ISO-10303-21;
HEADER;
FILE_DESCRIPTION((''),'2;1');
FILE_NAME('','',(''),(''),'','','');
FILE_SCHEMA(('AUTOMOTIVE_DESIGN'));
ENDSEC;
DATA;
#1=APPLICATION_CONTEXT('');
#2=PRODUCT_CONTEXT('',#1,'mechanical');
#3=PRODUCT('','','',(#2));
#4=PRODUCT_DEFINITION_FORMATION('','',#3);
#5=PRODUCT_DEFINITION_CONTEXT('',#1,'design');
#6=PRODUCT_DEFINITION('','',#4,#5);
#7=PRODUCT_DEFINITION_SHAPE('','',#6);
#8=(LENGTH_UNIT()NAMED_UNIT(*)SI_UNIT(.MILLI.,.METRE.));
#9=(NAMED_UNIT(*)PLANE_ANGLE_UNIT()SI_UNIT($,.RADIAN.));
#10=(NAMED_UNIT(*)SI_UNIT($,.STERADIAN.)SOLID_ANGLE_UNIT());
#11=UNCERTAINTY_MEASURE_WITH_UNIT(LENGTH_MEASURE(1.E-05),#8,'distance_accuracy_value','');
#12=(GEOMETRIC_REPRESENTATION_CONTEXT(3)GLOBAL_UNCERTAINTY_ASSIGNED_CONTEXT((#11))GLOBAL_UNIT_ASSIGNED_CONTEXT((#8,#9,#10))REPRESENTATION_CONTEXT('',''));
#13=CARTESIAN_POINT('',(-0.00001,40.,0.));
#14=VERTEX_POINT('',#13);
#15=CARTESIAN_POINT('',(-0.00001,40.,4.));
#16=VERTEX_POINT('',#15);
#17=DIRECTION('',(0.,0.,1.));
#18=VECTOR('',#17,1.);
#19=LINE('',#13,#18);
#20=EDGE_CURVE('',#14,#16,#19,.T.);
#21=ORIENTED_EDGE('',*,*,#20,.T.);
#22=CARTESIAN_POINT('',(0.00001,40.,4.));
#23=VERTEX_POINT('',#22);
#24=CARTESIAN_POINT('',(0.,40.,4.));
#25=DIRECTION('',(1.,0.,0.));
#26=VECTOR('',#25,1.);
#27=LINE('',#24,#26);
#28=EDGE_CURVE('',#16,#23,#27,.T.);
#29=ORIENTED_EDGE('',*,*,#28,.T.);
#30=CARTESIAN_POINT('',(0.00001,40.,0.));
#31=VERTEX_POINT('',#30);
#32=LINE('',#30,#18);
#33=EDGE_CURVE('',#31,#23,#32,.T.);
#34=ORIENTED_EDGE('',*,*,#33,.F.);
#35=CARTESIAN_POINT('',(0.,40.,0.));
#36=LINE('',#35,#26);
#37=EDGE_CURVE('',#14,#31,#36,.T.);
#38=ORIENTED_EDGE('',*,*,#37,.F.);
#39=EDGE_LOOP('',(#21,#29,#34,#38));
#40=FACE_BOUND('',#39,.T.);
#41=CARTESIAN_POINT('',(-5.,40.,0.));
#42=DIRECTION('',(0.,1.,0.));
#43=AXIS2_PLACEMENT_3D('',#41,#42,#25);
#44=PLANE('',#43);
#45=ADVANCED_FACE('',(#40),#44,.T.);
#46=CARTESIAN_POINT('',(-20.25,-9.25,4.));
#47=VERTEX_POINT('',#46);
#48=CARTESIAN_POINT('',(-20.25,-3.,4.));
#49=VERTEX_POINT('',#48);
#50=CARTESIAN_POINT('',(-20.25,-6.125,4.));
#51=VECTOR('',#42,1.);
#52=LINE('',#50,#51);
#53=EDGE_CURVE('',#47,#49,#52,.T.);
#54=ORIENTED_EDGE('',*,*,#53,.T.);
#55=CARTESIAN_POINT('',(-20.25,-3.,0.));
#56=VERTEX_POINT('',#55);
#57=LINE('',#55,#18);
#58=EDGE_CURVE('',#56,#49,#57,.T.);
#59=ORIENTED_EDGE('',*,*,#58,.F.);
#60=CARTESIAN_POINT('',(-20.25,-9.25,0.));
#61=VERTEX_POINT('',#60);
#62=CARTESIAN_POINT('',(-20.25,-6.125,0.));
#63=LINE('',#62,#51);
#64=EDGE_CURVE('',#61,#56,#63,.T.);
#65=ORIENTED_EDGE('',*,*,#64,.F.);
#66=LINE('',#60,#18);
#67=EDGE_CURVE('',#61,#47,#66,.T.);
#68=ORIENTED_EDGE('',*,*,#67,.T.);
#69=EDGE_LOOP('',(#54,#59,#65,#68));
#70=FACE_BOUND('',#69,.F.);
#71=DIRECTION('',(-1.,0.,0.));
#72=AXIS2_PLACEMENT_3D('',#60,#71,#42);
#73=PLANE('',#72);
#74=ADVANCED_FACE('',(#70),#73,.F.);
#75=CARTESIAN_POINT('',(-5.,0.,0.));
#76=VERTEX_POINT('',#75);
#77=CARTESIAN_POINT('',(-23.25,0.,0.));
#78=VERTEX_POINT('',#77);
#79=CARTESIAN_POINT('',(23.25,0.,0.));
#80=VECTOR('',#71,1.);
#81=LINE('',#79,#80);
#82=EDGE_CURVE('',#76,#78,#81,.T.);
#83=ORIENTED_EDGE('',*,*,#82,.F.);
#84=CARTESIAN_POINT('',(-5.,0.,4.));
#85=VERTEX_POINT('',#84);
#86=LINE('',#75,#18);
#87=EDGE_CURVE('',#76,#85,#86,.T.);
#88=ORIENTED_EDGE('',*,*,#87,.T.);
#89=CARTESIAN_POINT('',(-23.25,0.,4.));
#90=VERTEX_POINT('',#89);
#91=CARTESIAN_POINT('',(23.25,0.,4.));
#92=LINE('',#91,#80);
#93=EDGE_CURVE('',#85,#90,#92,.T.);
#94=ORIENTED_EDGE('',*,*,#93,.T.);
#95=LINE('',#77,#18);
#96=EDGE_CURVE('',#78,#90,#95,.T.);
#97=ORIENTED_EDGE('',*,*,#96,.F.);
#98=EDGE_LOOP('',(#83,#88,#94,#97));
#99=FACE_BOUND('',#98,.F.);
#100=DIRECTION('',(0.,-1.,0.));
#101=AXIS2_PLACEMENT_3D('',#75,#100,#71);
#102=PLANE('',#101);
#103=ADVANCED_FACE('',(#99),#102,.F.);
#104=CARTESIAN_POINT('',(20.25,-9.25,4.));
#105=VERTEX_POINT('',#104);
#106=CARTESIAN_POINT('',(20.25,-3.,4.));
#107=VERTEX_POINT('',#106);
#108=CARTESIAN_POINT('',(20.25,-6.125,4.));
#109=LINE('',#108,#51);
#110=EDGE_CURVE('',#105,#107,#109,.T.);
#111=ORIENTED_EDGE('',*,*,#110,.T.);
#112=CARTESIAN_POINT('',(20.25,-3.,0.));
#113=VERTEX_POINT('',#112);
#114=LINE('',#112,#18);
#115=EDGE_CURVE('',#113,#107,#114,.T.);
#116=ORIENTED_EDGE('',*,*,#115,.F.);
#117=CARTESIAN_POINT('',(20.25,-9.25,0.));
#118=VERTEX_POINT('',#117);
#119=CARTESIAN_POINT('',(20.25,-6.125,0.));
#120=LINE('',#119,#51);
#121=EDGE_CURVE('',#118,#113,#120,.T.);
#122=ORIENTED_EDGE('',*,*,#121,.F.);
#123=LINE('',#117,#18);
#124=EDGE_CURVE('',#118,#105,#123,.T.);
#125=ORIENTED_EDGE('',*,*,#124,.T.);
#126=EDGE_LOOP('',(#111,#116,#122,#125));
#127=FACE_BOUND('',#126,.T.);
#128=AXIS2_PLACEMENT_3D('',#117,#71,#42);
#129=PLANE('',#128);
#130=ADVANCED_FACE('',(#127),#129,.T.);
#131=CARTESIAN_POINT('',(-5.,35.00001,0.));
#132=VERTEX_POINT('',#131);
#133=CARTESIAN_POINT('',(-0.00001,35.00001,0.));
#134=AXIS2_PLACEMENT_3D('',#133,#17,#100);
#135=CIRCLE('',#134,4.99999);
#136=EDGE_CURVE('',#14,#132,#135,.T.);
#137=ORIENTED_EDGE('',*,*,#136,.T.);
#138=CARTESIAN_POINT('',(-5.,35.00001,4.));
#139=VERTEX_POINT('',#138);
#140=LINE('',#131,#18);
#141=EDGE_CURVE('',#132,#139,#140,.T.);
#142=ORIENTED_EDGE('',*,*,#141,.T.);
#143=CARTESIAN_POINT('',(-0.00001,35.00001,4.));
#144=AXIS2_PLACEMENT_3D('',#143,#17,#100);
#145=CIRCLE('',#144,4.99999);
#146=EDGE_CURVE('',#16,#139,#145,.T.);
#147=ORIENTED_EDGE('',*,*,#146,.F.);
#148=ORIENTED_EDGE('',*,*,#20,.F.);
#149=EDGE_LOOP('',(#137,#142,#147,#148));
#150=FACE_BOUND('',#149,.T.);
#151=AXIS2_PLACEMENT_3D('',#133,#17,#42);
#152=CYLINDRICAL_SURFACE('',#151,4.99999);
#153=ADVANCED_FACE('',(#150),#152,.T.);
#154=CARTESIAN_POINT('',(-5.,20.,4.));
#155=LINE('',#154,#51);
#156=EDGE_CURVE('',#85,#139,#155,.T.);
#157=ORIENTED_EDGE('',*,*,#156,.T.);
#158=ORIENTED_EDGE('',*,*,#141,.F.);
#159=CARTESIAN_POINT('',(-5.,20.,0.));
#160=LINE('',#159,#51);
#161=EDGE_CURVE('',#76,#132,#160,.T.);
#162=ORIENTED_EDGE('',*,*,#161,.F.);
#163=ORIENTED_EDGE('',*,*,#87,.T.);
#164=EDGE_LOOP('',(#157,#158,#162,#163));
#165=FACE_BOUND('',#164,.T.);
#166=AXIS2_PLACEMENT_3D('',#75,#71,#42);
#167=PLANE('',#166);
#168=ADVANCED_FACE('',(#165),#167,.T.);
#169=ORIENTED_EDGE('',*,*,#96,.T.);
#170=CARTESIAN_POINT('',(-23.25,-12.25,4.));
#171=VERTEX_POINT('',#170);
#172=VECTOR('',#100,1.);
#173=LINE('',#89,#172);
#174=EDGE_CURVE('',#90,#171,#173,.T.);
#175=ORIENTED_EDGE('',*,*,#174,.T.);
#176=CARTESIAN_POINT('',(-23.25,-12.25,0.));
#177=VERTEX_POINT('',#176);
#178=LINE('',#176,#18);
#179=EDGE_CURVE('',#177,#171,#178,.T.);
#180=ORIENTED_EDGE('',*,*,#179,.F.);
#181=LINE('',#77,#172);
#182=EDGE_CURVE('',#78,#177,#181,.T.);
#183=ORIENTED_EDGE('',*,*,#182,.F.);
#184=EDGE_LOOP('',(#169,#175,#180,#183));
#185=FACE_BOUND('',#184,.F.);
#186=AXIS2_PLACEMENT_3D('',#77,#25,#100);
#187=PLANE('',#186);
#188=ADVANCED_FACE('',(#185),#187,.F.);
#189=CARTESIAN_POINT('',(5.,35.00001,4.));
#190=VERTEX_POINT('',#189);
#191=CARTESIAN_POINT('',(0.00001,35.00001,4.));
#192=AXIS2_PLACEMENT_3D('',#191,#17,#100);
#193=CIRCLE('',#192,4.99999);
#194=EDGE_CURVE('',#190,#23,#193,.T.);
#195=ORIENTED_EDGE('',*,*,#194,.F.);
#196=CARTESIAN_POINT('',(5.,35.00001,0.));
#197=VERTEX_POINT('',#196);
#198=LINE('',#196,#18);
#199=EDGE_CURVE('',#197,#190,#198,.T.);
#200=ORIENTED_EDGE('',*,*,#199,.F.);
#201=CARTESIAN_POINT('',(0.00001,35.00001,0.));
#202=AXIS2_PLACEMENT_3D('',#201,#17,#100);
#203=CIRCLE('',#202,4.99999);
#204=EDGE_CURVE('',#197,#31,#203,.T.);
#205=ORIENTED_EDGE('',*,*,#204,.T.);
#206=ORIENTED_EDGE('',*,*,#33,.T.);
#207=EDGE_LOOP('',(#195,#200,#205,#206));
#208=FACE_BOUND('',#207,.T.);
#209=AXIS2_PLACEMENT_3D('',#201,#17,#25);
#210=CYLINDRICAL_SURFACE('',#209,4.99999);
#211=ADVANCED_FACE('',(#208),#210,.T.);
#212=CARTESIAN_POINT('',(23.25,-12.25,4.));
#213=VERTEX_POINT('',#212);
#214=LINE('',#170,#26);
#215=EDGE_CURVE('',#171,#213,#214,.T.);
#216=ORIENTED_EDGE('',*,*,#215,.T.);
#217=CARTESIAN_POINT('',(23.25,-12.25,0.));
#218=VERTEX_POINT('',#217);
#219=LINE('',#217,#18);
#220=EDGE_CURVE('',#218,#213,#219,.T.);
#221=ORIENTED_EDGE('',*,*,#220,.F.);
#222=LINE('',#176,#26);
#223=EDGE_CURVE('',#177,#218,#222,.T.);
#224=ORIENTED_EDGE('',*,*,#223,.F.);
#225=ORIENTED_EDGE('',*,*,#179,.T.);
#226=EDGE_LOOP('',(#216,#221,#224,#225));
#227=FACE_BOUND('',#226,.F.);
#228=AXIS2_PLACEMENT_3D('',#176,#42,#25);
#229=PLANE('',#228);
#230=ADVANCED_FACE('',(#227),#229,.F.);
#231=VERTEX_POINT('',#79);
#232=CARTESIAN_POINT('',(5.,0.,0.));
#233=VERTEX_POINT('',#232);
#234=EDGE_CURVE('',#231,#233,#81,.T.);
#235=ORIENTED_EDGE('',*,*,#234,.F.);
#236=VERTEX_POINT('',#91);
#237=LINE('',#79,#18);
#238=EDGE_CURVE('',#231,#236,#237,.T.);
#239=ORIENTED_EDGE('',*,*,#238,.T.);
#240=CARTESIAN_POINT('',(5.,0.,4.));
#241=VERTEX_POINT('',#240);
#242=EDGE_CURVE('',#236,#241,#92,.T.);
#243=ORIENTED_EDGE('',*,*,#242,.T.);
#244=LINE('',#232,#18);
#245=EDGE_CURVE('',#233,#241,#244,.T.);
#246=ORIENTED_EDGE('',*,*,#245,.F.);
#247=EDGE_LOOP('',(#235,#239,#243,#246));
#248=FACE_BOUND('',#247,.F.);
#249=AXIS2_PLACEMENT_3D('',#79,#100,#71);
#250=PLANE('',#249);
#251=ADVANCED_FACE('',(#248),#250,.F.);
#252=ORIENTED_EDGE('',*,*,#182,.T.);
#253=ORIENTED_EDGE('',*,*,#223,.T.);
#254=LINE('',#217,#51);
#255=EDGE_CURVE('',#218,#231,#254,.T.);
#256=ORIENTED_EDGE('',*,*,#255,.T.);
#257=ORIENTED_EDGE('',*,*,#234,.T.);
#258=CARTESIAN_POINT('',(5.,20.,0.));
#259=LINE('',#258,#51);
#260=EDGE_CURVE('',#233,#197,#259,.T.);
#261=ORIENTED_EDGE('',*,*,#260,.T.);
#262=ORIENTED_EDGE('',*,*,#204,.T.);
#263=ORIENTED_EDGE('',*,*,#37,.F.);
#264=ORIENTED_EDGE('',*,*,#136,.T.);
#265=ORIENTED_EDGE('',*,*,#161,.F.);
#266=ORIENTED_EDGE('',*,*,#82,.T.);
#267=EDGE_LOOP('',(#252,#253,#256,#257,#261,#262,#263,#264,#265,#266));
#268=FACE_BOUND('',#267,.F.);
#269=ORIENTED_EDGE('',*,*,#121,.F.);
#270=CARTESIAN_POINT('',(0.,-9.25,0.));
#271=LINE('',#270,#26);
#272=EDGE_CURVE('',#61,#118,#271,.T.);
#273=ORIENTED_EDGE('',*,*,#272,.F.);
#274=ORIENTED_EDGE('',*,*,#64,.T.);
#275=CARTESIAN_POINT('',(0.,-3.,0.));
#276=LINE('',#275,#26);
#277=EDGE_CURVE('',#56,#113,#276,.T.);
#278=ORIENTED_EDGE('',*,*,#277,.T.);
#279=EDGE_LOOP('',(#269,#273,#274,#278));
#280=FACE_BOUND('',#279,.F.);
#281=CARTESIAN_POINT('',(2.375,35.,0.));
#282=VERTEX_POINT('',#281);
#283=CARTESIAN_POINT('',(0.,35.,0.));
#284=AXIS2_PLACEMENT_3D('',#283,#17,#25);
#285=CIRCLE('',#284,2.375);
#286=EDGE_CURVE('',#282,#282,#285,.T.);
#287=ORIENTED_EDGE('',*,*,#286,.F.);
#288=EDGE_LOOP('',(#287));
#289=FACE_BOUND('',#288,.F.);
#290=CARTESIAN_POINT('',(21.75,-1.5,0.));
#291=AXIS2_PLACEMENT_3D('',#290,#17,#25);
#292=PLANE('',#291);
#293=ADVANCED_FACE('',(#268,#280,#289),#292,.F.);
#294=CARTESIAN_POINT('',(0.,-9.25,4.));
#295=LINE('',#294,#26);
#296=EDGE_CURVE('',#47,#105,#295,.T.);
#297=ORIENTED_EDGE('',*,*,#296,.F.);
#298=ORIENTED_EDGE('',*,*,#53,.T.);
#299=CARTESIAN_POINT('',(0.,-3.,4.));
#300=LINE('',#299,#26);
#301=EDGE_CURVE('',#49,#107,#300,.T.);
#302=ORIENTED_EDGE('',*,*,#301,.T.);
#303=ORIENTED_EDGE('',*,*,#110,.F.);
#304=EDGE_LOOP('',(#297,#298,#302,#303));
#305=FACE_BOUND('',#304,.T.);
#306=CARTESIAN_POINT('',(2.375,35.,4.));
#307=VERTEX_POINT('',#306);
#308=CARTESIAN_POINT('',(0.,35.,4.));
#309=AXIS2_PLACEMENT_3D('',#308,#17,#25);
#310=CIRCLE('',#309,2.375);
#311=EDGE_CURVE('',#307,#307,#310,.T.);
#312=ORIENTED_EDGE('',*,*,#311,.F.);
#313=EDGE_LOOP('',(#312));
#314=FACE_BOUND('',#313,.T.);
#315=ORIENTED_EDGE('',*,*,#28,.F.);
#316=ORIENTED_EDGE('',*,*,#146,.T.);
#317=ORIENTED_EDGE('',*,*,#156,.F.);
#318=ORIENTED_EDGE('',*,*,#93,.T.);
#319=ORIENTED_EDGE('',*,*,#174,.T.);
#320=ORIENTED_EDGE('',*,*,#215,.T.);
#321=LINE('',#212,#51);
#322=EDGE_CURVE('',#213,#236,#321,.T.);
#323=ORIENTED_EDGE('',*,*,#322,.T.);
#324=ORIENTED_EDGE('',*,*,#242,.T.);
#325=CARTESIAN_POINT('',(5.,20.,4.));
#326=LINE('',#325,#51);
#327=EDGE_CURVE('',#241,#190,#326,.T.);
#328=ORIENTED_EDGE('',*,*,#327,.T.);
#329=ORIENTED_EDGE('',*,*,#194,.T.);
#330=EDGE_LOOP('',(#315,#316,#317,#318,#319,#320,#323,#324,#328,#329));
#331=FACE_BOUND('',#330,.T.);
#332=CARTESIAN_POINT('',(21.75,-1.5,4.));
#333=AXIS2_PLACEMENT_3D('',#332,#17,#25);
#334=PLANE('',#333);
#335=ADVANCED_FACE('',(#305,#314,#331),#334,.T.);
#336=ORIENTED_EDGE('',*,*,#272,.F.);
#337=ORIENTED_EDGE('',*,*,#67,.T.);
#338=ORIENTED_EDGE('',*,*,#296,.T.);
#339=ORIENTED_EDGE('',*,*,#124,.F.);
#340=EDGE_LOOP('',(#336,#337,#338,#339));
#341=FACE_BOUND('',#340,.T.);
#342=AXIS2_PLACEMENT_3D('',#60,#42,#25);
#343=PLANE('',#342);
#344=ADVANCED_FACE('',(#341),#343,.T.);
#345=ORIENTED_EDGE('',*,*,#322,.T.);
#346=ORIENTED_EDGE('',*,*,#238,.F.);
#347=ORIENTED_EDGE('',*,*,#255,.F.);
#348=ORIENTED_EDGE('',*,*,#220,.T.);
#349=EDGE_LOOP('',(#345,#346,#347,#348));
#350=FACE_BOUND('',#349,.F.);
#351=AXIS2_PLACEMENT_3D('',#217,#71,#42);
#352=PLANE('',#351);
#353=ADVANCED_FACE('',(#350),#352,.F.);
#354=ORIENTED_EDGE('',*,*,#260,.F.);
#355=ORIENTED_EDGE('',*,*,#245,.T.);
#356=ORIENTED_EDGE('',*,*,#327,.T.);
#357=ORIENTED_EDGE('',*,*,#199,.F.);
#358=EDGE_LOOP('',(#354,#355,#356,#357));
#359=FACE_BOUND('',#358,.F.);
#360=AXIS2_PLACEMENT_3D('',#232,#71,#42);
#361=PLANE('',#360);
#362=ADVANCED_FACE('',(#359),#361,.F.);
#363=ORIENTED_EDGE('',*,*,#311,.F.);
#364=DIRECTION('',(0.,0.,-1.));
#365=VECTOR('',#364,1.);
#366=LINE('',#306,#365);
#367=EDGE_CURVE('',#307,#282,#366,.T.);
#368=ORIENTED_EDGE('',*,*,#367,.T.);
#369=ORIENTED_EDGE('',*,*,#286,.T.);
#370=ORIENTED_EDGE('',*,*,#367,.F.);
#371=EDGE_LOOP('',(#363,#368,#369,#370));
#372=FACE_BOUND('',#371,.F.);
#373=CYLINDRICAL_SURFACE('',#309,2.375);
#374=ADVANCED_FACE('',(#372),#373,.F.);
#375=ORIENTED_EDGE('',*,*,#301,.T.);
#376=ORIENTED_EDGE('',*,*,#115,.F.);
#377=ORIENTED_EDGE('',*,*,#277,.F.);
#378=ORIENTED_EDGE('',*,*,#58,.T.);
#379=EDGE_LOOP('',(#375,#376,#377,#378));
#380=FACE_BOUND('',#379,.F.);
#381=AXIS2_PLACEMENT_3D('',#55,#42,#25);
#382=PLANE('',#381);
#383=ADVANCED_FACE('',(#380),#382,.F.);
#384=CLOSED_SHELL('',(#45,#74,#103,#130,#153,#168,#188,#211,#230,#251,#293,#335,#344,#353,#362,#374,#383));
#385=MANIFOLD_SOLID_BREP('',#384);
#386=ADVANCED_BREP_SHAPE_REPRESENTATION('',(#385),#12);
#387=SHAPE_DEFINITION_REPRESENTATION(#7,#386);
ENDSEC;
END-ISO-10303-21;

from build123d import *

# Parameters (mm, degrees)
F0_W     = 3
F0_H     = 3
F0_W_2   = 40.5
F0_H_2   = 6.25
F0_W_3   = 10
F0_H_3   = 40
F1_DEPTH = 4
F2_R     = 4.99999
F3_R     = 2.375
F4_DEPTH = 4.001


# Not quite as in the source:
# - a fillet or chamfer is up to 0.001 mm smaller than in the source, because OpenCascade refuses the exact size


with BuildPart() as f1:
    # F0 (on Top) → F1 (new body)
    with BuildSketch(Plane.XY):
        with Locations((21.75, -1.5)):
            Rectangle(F0_W, F0_H)
        Polygon((20.25, -3), (20.25, 0), (5, 0), (-5, 0), (-23.25, 0), (-23.25, -12.25), (23.25, -12.25), (23.25, -3), align=None)
        with Locations((0, -6.125)):
            Rectangle(F0_W_2, F0_H_2, mode=Mode.SUBTRACT)
        with Locations((0, 20)):
            Rectangle(F0_W_3, F0_H_3)
    extrude(amount=F1_DEPTH)

    # F2 (radius 5 in the source; OpenCascade refuses exactly that, so slightly less here)
    f2_edges = [f1.edges().sort_by_distance(p)[0] for p in [
        (5, 40, 2),
        (-5, 40, 2),
    ]]
    fillet(f2_edges, radius=F2_R)

    # F3 (on face) → F4 (cut, through all)
    with BuildSketch(Plane.XY.offset(4)):
        with Locations((0, 35)):
            Circle(F3_R)
    extrude(amount=-F4_DEPTH, mode=Mode.SUBTRACT)


solid = f1.part
